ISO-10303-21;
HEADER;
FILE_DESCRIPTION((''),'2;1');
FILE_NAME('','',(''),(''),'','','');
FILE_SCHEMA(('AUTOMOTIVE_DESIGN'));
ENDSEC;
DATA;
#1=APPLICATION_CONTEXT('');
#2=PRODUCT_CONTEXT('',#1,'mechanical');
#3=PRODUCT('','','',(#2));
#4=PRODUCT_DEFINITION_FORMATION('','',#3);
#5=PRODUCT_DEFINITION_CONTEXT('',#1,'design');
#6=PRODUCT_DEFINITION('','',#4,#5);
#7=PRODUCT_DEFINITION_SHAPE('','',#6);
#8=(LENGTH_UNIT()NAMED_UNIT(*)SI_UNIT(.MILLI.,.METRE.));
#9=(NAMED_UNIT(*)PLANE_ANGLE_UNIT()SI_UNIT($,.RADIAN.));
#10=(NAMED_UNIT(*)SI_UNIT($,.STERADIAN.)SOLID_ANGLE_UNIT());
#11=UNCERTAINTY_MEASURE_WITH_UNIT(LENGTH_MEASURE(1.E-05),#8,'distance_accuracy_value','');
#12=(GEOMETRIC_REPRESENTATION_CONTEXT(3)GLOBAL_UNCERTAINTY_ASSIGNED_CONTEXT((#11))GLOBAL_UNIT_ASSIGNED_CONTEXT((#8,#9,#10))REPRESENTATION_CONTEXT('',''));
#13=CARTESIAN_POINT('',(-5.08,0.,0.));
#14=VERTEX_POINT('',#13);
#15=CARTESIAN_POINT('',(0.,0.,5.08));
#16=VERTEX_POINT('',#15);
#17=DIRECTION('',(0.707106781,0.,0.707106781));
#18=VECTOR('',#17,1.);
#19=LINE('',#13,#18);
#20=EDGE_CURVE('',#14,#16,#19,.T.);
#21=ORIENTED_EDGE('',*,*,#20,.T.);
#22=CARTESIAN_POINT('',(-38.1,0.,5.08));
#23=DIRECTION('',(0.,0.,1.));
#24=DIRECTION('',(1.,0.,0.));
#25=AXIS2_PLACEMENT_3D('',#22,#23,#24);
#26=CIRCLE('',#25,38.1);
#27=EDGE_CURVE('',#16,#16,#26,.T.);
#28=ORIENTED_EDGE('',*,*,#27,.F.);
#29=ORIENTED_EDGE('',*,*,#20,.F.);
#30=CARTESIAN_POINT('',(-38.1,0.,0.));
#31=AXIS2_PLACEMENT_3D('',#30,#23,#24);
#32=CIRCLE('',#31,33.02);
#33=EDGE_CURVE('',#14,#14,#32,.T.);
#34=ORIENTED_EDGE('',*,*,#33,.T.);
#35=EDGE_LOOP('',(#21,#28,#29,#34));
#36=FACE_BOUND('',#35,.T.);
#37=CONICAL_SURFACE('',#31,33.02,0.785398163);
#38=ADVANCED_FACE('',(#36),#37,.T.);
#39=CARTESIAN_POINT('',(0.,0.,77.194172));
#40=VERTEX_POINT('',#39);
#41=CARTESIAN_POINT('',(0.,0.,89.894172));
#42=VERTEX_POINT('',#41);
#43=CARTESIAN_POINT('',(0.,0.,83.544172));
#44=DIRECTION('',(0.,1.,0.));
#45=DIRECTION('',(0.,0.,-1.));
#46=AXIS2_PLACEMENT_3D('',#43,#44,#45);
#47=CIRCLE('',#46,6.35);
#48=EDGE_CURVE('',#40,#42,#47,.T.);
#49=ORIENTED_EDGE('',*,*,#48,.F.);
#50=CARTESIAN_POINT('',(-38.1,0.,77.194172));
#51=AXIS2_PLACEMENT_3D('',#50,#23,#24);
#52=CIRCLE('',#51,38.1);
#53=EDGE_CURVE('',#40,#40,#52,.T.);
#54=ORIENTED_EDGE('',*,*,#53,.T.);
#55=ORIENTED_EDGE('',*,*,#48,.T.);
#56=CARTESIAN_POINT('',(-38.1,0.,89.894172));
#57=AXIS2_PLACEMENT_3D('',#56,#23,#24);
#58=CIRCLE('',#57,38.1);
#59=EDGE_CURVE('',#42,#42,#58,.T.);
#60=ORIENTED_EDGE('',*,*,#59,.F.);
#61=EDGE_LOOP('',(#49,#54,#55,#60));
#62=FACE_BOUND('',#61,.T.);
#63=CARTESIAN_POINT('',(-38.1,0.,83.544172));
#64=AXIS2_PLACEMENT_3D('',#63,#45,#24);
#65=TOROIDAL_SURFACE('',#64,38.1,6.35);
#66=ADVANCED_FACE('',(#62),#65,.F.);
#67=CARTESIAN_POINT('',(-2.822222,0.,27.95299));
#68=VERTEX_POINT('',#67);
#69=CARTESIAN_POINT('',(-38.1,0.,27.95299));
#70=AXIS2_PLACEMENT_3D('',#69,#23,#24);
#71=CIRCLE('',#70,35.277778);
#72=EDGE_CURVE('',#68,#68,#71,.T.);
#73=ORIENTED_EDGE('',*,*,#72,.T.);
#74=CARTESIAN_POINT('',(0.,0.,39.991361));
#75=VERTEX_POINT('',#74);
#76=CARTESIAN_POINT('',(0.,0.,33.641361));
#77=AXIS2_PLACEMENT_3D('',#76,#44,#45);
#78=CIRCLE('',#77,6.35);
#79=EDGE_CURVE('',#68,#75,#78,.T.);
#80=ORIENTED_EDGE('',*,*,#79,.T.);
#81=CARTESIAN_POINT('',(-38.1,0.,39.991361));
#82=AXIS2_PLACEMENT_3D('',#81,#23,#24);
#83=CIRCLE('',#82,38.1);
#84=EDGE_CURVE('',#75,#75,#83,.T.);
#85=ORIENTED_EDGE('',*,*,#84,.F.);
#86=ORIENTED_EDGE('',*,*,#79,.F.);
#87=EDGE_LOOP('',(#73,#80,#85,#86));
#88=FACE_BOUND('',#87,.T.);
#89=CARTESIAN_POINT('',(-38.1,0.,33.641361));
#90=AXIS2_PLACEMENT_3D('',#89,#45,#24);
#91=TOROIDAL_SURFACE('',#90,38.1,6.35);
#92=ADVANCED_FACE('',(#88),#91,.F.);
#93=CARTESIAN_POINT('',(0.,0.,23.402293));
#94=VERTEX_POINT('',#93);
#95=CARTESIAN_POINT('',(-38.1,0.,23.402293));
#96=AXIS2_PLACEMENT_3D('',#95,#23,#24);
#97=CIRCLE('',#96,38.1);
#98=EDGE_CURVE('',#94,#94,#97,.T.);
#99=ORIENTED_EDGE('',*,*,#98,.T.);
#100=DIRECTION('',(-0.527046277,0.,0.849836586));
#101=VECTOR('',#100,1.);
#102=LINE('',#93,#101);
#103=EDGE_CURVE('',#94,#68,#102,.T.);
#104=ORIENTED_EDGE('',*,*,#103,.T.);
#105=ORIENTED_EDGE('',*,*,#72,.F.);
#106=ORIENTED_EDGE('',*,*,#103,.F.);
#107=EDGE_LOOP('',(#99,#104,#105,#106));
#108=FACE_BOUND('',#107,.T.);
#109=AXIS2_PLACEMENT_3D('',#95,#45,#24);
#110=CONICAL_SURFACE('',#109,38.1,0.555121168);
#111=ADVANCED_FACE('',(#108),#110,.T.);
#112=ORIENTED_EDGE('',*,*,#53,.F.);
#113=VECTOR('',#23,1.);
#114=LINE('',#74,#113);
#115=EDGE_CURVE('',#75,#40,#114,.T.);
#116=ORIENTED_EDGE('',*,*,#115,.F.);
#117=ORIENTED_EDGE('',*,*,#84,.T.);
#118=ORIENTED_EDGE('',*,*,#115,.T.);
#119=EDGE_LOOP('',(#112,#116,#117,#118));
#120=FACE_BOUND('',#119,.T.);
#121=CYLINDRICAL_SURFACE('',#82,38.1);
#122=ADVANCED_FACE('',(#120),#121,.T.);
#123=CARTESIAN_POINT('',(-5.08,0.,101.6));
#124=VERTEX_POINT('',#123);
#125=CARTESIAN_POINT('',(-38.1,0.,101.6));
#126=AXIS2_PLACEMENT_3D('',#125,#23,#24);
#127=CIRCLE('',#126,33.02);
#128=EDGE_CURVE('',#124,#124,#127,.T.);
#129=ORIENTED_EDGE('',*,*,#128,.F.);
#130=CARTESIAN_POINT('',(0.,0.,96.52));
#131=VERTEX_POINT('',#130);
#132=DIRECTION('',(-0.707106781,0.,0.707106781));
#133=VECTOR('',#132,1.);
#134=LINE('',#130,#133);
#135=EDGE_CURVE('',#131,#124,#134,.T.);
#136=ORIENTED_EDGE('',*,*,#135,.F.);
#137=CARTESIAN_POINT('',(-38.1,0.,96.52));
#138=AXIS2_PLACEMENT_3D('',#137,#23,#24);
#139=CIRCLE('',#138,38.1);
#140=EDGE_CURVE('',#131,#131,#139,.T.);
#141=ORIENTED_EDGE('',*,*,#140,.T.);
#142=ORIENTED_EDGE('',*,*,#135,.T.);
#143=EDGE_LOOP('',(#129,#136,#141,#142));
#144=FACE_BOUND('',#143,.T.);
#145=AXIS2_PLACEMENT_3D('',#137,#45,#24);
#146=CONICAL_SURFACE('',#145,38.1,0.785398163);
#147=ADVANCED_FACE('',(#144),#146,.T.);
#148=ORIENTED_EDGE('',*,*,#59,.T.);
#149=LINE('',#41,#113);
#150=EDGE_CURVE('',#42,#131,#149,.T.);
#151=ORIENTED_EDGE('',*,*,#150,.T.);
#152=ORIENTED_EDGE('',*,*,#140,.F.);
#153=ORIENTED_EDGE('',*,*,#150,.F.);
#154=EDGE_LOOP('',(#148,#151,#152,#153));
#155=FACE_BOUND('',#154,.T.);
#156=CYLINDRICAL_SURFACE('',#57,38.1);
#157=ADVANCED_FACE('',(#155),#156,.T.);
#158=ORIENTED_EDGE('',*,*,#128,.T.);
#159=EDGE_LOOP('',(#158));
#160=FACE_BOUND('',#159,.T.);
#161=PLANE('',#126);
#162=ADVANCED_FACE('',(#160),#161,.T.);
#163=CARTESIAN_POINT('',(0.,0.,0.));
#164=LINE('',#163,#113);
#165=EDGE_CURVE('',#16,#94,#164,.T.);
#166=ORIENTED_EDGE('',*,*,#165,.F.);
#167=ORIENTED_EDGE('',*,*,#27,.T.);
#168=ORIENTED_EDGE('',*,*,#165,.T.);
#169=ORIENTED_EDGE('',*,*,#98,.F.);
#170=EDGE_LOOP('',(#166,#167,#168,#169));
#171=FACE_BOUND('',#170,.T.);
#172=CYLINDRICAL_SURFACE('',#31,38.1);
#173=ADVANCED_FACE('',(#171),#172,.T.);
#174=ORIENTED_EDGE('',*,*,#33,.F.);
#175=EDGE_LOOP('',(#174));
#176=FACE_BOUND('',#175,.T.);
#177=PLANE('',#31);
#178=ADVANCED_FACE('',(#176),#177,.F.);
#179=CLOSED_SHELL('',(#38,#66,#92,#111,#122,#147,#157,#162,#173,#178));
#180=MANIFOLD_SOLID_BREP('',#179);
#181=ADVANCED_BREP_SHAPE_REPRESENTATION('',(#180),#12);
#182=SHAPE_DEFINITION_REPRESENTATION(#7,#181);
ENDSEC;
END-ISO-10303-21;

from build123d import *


# Not quite as in the source:
# - a fillet or chamfer that OpenCascade refuses, or shapes differently, is made with other operations: its cross-section is extruded or revolved along the edge and cut away or added


with BuildPart() as f1:
    # F0 (on Front) → F1 (revolve)
    with BuildSketch(Plane.XZ):
        with BuildLine():
            Line((-38.1, 0), (0, 0))
            Line((0, 0), (0, 27.2913607001))
            ThreePointArc((0, 27.2913607001), (-6.35, 33.6413607001), (0, 39.9913607001))
            Line((0, 39.9913607001), (0, 77.1941723466))
            ThreePointArc((0, 77.1941723466), (-6.35, 83.5441723466), (0, 89.8941723466))
            Line((0, 89.8941723466), (0, 101.6))
            Line((0, 101.6), (-38.1, 101.6))
            Line((-38.1, 101.6), (-38.1, 0))
        make_face()
    revolve(axis=Axis((-38.1, 0, 50.8), (0, 0, 1)))

    # F2: chamfer of 5.08 on 4 edges, made by hand

    # F2_s1 → F2_t2 (revolve, cut)
    with BuildSketch(Plane.XZ):
        Polygon((0, 96.52), (-5.08, 101.6), (0, 101.6), align=None)
    revolve(axis=Axis((-38.1, 0, 101.6), (0, 0, 1)), mode=Mode.SUBTRACT)

    # F2_s3 → F2_t4 (revolve, cut)
    with BuildSketch(Plane.XZ):
        Polygon((-5.08, 0), (0, 5.08), (0, 0), align=None)
    revolve(axis=Axis((-38.1, 0, 0), (0, 0, 1)), mode=Mode.SUBTRACT)

    # F2_s5 → F2_t6 (revolve, cut)
    with BuildSketch(Plane.XZ):
        with BuildLine():
            Line((0, 23.4022933598), (-2.8222222222, 27.9529899555))
            ThreePointArc((-2.8222222222, 27.9529899555), (-1.5219513398, 27.4764467413), (0, 27.2913607001))
            Line((0, 27.2913607001), (0, 23.4022933598))
        make_face()
    revolve(axis=Axis((-38.1, 0, 27.2913607001), (0, 0, 1)), mode=Mode.SUBTRACT)


solid = f1.part
